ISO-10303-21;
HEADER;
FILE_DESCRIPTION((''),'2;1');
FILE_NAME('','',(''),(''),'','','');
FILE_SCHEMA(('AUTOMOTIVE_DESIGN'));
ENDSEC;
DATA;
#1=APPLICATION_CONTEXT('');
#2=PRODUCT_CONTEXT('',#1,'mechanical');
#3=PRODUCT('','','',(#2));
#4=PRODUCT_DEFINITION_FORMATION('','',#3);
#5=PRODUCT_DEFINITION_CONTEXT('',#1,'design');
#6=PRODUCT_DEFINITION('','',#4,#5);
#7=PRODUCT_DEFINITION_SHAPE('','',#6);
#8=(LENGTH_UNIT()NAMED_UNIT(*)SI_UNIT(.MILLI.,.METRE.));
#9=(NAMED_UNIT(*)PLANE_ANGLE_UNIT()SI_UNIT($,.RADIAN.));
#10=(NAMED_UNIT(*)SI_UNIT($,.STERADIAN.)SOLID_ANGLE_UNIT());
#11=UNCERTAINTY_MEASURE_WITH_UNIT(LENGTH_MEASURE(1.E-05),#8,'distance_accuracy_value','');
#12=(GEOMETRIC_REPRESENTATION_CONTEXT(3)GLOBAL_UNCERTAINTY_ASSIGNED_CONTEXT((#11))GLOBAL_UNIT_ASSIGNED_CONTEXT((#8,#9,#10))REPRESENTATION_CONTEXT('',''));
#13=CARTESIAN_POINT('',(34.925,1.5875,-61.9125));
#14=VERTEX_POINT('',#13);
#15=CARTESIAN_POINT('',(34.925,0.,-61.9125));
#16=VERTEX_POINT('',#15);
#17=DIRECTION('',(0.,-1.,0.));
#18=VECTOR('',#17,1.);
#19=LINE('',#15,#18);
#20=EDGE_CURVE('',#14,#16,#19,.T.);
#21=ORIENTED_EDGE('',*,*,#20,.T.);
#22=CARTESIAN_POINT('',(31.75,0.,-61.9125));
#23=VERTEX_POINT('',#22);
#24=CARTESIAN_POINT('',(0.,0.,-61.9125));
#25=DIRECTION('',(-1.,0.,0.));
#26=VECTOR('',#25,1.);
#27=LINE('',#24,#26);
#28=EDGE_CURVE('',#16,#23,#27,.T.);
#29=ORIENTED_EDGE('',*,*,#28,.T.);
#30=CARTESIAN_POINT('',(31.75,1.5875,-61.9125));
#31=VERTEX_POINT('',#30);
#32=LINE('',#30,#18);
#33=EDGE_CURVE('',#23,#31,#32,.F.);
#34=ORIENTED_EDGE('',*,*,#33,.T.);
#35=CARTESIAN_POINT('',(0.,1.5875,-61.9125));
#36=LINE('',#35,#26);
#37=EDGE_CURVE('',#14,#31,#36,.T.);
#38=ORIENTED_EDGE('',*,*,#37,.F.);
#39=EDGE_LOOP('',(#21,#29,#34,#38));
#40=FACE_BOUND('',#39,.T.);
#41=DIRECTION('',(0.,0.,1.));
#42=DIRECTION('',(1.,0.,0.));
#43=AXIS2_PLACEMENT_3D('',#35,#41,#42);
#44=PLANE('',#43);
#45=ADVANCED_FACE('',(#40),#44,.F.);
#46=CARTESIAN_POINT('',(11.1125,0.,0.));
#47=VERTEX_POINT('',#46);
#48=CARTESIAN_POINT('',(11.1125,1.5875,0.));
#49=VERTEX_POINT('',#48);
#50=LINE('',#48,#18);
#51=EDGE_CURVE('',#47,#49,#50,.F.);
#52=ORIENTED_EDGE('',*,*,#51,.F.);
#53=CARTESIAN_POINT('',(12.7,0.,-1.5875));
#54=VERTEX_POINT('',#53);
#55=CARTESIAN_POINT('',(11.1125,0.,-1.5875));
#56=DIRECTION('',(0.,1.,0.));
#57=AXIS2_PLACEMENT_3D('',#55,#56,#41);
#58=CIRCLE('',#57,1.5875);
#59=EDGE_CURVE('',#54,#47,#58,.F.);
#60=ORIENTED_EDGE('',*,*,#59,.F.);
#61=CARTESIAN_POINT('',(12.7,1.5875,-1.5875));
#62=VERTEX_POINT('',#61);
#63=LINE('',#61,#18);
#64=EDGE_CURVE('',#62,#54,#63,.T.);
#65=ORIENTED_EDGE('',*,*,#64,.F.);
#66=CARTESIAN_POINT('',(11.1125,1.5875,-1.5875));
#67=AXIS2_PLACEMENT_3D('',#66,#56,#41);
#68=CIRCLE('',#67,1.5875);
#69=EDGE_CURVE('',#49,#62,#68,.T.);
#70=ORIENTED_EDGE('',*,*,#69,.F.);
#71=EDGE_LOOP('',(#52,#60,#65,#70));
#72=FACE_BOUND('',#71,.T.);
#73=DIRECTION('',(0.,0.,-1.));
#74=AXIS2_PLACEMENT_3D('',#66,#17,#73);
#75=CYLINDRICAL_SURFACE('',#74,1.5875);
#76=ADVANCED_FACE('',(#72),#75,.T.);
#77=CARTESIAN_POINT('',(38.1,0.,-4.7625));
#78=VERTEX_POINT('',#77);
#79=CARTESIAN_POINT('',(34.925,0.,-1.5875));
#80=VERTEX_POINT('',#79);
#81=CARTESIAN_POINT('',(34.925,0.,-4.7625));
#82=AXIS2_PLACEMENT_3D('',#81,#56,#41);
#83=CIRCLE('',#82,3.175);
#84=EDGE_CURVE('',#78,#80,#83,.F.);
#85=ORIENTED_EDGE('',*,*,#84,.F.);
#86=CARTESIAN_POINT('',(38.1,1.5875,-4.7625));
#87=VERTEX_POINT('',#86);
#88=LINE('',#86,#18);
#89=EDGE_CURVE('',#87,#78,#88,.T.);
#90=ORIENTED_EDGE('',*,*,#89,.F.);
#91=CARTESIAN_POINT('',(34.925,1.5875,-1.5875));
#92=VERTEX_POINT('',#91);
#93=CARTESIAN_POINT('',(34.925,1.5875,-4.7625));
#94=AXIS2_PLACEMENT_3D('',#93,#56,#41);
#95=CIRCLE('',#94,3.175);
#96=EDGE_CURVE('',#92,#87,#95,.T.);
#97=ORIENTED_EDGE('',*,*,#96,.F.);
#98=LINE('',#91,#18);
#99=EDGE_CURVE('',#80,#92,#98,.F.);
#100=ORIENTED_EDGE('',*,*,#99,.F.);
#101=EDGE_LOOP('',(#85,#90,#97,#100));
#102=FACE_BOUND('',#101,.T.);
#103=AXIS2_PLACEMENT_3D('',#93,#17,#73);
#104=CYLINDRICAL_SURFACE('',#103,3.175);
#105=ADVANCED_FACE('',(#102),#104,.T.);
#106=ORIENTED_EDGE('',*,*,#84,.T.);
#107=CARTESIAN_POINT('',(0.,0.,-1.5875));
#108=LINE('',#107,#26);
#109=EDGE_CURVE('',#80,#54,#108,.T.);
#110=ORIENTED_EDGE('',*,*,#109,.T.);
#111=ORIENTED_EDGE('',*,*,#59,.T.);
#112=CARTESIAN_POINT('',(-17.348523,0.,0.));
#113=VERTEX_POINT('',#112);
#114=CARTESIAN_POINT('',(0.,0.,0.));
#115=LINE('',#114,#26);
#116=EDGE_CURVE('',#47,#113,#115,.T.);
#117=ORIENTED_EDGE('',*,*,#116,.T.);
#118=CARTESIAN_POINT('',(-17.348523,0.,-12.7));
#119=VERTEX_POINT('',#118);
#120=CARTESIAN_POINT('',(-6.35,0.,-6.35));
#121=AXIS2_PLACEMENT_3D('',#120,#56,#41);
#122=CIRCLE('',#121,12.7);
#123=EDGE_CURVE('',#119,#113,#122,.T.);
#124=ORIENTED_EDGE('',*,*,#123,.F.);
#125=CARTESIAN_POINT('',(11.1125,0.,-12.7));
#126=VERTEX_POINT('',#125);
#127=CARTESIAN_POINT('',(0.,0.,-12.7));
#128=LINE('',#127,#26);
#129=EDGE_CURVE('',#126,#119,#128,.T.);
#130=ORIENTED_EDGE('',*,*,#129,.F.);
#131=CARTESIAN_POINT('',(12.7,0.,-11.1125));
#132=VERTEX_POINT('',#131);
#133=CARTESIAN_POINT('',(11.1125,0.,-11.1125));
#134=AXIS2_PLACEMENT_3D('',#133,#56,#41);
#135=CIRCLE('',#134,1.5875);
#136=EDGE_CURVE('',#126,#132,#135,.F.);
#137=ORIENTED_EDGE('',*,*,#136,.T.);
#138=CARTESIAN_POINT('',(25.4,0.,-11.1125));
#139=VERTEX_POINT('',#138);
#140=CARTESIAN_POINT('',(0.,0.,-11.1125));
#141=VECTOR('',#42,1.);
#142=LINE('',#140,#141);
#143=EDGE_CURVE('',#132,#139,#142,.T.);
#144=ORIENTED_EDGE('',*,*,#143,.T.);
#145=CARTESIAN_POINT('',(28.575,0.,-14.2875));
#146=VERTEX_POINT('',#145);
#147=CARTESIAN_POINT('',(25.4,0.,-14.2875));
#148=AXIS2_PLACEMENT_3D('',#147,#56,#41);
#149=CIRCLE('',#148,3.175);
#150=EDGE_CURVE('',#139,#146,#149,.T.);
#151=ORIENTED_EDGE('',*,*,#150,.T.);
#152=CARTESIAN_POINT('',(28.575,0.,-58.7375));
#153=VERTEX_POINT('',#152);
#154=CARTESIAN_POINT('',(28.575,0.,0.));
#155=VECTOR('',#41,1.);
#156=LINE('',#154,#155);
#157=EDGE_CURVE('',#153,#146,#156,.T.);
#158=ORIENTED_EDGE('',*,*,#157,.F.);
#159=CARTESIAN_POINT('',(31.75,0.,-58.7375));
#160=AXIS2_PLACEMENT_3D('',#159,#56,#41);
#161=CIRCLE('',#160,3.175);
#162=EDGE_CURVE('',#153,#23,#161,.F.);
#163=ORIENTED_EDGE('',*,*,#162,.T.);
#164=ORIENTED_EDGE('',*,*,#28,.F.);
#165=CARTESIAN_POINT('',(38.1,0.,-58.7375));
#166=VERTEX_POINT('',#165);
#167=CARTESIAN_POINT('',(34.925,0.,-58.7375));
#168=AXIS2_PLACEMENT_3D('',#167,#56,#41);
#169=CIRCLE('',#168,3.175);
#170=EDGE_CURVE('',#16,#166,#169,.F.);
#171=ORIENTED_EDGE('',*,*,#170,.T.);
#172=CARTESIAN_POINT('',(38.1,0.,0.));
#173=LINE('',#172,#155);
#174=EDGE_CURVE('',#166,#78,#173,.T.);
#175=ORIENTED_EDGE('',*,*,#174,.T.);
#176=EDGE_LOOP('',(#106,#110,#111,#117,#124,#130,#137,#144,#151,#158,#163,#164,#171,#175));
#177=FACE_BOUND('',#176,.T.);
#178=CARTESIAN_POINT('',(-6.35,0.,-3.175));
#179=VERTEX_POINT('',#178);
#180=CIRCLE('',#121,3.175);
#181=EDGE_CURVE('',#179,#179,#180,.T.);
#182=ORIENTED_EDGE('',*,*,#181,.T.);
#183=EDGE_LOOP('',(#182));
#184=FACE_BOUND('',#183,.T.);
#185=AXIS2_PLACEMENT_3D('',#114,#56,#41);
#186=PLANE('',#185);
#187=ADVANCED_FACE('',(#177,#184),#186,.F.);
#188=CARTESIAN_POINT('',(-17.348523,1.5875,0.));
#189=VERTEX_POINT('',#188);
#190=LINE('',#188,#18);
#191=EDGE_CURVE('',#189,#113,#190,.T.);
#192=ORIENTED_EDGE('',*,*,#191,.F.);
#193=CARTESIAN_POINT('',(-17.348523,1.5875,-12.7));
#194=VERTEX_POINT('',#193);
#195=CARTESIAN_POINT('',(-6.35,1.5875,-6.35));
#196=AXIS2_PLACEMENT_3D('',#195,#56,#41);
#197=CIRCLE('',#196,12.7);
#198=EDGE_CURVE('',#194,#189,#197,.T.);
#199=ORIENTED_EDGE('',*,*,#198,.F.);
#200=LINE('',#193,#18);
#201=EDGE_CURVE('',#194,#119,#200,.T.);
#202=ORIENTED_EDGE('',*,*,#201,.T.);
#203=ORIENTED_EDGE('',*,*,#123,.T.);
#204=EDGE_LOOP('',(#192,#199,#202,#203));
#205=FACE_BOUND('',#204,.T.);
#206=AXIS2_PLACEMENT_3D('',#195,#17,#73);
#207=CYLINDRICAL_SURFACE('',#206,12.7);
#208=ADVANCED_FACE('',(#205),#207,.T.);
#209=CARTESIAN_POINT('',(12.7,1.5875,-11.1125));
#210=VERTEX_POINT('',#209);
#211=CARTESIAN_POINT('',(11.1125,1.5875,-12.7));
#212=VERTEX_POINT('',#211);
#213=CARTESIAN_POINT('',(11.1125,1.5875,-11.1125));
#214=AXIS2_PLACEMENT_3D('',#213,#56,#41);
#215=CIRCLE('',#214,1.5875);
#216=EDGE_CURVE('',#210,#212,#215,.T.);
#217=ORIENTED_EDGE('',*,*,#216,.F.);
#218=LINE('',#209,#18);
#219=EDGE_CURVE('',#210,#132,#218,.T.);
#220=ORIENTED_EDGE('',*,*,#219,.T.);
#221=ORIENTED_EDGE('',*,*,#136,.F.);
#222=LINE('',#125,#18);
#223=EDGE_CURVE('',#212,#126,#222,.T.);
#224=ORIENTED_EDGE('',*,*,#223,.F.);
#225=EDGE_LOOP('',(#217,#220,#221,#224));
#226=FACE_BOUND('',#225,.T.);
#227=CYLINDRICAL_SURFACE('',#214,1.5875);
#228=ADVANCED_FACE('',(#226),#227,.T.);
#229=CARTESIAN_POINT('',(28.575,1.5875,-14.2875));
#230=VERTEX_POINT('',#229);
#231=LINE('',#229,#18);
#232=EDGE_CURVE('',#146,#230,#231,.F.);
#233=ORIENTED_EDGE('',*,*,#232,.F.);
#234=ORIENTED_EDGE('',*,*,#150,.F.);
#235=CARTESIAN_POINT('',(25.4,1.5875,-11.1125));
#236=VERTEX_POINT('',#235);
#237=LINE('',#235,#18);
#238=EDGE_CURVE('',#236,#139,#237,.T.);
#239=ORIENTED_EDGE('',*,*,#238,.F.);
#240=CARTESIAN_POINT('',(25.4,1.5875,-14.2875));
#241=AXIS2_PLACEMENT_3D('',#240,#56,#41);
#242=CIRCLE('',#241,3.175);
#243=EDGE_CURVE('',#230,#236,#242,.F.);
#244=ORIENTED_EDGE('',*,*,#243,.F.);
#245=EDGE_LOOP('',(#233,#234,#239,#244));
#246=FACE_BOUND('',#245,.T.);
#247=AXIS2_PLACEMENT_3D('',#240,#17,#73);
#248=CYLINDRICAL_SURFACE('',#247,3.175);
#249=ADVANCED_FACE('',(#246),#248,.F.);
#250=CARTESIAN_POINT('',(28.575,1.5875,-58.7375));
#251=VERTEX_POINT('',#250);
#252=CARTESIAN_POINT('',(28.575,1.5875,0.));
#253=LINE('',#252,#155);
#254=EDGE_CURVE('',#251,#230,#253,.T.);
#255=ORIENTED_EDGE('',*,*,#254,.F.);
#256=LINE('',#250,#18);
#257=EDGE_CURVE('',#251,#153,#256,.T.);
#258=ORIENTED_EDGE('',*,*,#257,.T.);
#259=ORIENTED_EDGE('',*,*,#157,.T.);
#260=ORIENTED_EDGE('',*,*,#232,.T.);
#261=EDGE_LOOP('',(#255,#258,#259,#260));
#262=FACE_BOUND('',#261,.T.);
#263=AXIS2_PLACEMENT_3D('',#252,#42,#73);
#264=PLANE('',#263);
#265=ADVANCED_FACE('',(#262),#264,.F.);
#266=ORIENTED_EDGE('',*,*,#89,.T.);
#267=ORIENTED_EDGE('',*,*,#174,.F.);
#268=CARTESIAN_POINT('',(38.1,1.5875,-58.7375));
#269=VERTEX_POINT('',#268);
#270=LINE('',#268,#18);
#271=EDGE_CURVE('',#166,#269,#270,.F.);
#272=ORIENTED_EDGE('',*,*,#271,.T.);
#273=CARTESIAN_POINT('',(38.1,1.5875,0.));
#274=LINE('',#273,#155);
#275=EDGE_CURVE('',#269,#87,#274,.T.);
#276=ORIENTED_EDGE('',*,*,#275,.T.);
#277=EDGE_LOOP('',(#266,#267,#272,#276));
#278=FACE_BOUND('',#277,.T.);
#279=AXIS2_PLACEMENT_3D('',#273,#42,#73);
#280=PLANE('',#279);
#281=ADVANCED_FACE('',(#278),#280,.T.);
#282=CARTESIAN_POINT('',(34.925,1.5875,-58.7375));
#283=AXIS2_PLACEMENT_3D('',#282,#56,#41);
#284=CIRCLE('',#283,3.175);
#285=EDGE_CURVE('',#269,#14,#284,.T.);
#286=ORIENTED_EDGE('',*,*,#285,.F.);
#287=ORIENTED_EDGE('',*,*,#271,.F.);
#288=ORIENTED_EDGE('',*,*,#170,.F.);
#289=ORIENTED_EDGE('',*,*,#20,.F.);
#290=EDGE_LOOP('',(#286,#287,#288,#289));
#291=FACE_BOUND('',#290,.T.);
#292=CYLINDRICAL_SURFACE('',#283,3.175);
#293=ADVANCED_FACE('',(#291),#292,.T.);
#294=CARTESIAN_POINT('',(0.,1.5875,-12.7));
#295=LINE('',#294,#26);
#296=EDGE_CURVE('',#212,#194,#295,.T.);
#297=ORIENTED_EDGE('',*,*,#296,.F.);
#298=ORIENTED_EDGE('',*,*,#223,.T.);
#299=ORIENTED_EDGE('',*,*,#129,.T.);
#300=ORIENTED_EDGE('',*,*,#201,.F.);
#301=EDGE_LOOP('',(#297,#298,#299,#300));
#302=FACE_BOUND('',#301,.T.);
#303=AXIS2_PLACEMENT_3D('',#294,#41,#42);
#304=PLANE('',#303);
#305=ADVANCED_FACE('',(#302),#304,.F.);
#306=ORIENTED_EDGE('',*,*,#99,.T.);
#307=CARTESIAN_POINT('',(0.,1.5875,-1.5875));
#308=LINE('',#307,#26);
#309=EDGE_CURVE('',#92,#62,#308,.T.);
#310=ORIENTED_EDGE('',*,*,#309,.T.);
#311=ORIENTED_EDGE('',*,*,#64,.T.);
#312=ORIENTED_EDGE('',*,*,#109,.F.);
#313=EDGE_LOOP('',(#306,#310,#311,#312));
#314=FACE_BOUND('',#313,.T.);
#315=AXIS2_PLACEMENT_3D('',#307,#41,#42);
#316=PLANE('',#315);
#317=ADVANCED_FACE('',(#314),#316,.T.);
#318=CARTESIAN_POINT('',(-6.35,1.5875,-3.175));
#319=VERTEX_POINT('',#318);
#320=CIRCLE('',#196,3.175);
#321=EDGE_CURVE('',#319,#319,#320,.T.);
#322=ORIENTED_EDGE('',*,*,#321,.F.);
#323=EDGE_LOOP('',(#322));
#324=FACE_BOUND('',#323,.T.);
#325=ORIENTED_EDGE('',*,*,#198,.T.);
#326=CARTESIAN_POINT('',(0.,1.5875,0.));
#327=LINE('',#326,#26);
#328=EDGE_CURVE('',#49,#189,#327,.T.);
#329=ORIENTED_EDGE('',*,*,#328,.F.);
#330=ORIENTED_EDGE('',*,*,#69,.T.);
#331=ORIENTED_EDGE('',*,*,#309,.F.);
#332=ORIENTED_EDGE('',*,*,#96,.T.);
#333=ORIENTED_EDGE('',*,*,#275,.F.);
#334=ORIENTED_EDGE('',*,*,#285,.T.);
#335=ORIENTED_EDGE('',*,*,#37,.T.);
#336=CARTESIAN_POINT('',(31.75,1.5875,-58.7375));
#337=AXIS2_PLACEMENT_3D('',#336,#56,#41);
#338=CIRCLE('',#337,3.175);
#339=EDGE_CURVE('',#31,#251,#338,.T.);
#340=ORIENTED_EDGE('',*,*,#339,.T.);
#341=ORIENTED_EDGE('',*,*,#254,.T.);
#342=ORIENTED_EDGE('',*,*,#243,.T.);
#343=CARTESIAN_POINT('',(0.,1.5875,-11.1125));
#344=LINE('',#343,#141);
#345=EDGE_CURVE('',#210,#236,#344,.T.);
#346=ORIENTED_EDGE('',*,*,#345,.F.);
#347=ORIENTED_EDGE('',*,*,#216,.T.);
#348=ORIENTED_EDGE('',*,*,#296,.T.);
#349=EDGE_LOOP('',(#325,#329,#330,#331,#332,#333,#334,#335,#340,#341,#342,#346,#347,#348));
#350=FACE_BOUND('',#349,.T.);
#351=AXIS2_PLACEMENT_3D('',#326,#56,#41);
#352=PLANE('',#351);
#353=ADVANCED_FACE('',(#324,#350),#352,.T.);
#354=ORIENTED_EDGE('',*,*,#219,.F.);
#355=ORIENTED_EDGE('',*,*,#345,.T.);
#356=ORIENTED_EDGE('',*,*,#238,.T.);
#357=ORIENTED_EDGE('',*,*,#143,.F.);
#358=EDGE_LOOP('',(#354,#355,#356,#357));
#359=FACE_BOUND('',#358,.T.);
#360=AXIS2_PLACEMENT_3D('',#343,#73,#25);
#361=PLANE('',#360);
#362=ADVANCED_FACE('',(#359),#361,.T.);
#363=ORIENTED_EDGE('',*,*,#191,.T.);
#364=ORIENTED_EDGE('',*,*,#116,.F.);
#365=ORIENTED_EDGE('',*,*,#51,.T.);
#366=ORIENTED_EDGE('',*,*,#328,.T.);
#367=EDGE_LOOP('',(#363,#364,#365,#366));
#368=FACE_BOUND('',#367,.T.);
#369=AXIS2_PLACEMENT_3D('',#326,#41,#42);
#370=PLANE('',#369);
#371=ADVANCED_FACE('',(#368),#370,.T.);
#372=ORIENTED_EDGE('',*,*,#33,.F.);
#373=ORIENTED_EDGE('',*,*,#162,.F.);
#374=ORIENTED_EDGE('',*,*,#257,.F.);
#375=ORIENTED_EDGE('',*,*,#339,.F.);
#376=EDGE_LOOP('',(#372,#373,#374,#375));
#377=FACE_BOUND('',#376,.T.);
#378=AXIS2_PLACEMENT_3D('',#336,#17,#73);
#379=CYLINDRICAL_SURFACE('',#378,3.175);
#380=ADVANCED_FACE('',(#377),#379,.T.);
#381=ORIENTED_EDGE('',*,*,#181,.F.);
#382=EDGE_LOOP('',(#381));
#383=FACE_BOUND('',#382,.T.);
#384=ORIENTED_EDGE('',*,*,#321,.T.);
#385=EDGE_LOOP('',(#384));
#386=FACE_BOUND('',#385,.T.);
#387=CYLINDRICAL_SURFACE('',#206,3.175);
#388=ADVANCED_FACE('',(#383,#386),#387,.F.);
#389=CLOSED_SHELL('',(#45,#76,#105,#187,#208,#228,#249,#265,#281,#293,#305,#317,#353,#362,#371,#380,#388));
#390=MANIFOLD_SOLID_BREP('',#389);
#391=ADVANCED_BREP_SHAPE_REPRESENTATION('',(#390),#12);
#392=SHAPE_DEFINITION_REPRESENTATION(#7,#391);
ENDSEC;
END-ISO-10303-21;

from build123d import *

# Parameters (mm, degrees)
SKETCH1_R           = 3.175
BOSS_EXTRUDE1_DEPTH = 1.5875
FILLET1_R           = 3.175
FILLET2_R           = 1.5875


with BuildPart() as part:
    # Sketch1 → Boss-Extrude1 (new body)
    with BuildSketch(Plane(origin=(0, 0, 0), x_dir=(1, 0, 0), z_dir=(0, 1, 0))):
        with BuildLine():
            Line((-17.348522628, 0), (12.7, 0))
            Line((12.7, 0), (12.7, 1.5875))
            Line((12.7, 1.5875), (38.1, 1.5875))
            Line((38.1, 1.5875), (38.1, 61.9125))
            Line((38.1, 61.9125), (28.575, 61.9125))
            Line((28.575, 61.9125), (28.575, 11.1125))
            Line((28.575, 11.1125), (12.7, 11.1125))
            Line((12.7, 11.1125), (12.7, 12.7))
            Line((12.7, 12.7), (-17.348522628, 12.7))
            ThreePointArc((-17.348522628, 12.7), (-19.05, 6.35), (-17.348522628, 0))
        make_face()
        with Locations(Location((-6.35, 6.35, 0), (0, 0, 270))):
            Circle(SKETCH1_R, mode=Mode.SUBTRACT)
    extrude(amount=BOSS_EXTRUDE1_DEPTH)

    # Fillet1
    fillet1_edges = [part.edges().sort_by_distance(p)[0] for p in [
        (28.575, 0.79375, -11.1125),
        (28.575, 0.79375, -61.9125),
        (38.1, 0.79375, -61.9125),
        (38.1, 0.79375, -1.5875),
    ]]
    fillet(fillet1_edges, radius=FILLET1_R)

    # Fillet2
    fillet2_edges = [part.edges().sort_by_distance(p)[0] for p in [
        (12.7, 0.79375, 0),
        (12.7, 0.79375, -12.7),
    ]]
    fillet(fillet2_edges, radius=FILLET2_R - 0.0001)  # a hair under: the kernel refuses the full size


solid = part.part
